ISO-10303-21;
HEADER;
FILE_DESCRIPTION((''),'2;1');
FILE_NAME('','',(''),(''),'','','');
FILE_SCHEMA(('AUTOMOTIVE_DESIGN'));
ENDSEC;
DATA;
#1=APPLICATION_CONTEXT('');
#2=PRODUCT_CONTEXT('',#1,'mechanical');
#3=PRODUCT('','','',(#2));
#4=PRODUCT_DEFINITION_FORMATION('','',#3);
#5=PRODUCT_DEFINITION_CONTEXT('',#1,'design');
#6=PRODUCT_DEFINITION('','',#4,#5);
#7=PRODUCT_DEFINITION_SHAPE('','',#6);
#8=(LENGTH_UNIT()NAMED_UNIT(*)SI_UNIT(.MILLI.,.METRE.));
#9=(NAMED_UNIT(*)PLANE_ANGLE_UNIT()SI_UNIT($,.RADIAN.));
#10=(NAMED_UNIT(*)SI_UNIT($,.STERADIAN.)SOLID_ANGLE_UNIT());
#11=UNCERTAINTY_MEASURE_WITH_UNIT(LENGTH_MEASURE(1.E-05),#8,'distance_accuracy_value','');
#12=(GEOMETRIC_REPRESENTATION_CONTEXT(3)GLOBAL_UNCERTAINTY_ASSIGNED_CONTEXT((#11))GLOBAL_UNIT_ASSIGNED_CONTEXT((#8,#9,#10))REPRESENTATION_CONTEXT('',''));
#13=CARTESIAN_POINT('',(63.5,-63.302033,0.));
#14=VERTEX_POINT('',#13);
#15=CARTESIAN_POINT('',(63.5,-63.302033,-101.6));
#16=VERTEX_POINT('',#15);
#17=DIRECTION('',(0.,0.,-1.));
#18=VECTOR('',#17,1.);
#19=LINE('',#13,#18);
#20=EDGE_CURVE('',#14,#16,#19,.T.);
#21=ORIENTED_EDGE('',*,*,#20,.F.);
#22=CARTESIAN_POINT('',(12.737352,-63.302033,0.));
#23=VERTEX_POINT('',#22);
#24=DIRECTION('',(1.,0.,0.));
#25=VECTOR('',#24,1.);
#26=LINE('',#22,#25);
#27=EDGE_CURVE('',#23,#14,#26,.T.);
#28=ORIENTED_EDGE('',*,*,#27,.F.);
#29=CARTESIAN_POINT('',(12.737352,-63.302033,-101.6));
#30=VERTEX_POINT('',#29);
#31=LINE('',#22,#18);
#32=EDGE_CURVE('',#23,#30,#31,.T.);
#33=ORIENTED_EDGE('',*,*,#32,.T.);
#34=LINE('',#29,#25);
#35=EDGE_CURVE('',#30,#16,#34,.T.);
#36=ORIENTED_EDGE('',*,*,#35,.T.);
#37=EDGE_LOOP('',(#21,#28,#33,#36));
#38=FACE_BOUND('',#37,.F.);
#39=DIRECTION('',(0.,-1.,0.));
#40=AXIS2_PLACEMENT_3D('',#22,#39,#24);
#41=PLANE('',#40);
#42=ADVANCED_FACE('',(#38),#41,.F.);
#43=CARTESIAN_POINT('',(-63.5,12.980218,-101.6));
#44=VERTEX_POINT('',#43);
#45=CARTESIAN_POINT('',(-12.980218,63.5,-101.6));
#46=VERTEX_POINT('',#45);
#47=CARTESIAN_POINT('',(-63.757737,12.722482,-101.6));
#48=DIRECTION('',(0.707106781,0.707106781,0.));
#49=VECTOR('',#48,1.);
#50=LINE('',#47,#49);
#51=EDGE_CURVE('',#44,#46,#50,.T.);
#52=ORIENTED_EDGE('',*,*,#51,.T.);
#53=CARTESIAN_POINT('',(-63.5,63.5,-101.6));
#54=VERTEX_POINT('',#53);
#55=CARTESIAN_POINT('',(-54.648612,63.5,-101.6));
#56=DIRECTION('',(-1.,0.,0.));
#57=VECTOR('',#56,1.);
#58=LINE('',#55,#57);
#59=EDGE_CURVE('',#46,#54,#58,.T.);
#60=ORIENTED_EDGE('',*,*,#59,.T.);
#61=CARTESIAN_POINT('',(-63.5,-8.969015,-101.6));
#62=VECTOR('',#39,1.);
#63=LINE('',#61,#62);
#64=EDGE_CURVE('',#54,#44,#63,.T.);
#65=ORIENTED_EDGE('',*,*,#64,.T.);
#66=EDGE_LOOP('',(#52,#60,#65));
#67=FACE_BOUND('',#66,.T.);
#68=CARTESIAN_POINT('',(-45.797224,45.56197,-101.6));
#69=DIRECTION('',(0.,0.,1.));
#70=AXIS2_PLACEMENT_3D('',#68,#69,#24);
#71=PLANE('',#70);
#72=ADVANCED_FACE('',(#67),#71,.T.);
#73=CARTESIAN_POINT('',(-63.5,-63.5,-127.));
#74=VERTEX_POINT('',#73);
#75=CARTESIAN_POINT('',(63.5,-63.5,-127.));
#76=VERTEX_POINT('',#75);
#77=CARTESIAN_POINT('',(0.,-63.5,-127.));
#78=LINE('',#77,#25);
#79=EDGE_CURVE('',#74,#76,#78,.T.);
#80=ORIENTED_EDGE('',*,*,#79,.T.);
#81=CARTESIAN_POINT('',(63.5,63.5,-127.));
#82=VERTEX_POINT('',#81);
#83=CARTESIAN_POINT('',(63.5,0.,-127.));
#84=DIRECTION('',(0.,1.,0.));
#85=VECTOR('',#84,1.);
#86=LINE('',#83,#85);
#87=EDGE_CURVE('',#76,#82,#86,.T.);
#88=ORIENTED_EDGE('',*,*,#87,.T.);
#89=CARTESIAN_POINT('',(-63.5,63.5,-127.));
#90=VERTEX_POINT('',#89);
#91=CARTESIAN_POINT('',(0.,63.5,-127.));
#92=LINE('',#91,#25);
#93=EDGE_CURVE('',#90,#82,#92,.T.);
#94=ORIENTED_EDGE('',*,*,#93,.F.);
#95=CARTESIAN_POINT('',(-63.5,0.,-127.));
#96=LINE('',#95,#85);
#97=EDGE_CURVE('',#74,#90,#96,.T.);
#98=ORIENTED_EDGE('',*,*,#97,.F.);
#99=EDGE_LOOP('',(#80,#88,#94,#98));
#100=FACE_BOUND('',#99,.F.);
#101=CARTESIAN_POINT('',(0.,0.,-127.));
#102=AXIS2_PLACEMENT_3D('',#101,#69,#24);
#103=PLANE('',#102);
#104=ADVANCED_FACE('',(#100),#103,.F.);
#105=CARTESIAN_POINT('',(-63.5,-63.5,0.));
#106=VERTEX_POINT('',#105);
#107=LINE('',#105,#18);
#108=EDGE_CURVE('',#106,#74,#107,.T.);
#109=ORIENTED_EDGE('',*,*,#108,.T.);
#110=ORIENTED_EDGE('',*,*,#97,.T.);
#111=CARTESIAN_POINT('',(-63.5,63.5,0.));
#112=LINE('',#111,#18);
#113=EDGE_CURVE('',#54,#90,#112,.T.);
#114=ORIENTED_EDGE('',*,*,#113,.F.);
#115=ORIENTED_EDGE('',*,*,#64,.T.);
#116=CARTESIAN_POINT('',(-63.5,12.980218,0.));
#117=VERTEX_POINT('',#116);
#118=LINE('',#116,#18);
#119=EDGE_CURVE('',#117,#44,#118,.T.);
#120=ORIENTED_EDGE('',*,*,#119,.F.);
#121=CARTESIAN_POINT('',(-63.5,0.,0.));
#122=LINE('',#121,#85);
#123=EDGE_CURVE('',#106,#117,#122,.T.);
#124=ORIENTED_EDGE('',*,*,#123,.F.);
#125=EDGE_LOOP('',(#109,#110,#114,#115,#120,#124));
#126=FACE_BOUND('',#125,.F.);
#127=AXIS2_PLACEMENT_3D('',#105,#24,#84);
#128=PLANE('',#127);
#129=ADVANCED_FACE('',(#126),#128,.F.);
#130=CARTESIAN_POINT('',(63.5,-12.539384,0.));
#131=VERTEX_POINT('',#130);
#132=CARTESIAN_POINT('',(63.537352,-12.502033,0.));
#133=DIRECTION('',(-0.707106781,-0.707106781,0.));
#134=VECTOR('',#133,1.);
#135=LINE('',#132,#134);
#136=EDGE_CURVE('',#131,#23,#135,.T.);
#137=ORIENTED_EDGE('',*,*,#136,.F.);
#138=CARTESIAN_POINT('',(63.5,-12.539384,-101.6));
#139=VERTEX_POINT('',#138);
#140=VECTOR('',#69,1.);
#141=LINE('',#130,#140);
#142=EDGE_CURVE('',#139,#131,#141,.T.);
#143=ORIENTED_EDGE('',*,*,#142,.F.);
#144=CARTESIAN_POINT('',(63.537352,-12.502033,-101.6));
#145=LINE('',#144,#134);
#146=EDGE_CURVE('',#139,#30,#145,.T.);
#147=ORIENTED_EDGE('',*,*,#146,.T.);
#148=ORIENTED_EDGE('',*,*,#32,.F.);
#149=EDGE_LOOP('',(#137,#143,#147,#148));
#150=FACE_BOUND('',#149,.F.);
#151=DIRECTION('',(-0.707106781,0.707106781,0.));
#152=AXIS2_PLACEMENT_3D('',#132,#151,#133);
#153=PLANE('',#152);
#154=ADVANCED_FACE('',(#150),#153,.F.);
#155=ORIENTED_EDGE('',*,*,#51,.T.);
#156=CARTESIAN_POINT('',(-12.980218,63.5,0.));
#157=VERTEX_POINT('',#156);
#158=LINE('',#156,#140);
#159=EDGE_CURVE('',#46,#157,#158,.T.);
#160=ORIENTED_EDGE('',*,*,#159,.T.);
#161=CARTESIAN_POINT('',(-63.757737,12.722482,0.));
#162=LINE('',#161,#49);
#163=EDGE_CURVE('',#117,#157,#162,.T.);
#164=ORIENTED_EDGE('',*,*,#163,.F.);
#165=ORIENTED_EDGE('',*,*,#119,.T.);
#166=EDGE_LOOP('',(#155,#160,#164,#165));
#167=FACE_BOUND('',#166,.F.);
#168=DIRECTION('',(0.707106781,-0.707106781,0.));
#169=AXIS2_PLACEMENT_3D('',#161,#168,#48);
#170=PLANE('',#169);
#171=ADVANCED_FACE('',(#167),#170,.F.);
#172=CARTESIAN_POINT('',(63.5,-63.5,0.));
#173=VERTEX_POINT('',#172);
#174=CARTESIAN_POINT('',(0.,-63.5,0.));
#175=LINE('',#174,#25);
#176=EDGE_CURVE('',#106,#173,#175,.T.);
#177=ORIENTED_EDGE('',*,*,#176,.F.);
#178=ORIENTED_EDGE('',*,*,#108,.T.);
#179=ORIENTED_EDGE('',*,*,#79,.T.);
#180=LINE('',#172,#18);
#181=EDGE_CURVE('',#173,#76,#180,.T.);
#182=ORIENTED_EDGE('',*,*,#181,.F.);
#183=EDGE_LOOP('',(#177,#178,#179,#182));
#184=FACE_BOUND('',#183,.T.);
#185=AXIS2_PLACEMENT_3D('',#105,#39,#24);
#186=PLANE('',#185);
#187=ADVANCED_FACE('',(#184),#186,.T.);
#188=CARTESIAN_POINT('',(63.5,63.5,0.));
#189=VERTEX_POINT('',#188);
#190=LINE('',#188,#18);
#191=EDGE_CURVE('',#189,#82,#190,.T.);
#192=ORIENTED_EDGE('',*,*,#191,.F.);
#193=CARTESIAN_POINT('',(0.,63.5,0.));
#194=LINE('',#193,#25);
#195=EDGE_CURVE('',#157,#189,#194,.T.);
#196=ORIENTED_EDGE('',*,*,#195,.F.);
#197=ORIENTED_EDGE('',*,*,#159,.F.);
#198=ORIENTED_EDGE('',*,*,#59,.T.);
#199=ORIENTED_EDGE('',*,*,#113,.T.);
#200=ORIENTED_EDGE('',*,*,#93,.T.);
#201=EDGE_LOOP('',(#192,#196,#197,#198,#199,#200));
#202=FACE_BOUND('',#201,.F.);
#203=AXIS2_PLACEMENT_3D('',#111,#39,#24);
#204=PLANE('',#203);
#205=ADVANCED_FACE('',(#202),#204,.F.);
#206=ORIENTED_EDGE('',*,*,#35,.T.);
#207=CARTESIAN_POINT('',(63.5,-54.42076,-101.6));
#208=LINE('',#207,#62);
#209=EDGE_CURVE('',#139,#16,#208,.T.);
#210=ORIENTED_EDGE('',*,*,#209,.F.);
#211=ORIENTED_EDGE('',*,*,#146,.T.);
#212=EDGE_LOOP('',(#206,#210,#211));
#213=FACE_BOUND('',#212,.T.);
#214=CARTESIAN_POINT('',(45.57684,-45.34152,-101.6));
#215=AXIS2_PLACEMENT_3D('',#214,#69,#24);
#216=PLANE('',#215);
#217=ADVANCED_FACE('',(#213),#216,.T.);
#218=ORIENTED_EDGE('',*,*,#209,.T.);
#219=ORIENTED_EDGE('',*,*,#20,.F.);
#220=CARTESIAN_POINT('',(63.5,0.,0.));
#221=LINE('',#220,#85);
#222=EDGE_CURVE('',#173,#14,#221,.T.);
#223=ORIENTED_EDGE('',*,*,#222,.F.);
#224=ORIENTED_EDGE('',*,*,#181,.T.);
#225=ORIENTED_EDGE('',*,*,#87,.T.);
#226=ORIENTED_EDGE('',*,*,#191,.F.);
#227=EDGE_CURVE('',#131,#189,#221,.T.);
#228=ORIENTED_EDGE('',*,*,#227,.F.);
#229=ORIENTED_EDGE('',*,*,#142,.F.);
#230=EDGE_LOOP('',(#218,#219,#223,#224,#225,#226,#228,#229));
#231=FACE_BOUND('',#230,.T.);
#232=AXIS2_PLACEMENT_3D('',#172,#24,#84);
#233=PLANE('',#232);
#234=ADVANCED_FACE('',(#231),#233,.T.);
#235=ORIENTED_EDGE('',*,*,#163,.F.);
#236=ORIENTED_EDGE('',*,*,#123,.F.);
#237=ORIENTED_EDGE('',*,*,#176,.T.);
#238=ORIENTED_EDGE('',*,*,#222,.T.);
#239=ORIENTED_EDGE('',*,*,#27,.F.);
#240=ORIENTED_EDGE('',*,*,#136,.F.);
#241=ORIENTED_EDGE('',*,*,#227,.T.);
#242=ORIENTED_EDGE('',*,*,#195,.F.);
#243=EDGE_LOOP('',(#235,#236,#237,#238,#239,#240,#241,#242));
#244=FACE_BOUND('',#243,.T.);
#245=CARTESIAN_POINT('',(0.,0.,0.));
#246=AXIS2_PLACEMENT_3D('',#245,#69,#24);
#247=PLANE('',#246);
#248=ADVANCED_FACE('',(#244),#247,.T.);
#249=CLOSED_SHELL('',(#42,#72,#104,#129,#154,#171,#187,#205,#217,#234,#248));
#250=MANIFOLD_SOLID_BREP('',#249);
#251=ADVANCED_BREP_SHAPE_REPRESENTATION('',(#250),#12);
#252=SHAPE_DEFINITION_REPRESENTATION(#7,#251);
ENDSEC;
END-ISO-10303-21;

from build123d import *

# Parameters (mm, degrees)
F0_W     = 127
F0_H     = 127
F1_DEPTH = 127
F3_DEPTH = 101.6


# Not quite as in the source:
# - a feature names something its author has since deleted; it is built from what else it names


with BuildPart() as f1:
    # F0 (on Top) → F1 (new body)
    with BuildSketch(Plane.XY):
        Rectangle(F0_W, F0_H)
    extrude(amount=-F1_DEPTH)

    # F2 (on Top) → F3 (cut)
    with BuildSketch(Plane.XY):
        Polygon((-12.9577365428, 63.5224819239), (-63.7577365428, 63.5224819239), (-63.7577365428, 12.7224819239), align=None)
        Polygon((12.7373517871, -63.3020326495), (63.5373517871, -63.3020326495), (63.5373517871, -12.5020326495), align=None)
    extrude(amount=-F3_DEPTH, mode=Mode.SUBTRACT)


solid = f1.part
